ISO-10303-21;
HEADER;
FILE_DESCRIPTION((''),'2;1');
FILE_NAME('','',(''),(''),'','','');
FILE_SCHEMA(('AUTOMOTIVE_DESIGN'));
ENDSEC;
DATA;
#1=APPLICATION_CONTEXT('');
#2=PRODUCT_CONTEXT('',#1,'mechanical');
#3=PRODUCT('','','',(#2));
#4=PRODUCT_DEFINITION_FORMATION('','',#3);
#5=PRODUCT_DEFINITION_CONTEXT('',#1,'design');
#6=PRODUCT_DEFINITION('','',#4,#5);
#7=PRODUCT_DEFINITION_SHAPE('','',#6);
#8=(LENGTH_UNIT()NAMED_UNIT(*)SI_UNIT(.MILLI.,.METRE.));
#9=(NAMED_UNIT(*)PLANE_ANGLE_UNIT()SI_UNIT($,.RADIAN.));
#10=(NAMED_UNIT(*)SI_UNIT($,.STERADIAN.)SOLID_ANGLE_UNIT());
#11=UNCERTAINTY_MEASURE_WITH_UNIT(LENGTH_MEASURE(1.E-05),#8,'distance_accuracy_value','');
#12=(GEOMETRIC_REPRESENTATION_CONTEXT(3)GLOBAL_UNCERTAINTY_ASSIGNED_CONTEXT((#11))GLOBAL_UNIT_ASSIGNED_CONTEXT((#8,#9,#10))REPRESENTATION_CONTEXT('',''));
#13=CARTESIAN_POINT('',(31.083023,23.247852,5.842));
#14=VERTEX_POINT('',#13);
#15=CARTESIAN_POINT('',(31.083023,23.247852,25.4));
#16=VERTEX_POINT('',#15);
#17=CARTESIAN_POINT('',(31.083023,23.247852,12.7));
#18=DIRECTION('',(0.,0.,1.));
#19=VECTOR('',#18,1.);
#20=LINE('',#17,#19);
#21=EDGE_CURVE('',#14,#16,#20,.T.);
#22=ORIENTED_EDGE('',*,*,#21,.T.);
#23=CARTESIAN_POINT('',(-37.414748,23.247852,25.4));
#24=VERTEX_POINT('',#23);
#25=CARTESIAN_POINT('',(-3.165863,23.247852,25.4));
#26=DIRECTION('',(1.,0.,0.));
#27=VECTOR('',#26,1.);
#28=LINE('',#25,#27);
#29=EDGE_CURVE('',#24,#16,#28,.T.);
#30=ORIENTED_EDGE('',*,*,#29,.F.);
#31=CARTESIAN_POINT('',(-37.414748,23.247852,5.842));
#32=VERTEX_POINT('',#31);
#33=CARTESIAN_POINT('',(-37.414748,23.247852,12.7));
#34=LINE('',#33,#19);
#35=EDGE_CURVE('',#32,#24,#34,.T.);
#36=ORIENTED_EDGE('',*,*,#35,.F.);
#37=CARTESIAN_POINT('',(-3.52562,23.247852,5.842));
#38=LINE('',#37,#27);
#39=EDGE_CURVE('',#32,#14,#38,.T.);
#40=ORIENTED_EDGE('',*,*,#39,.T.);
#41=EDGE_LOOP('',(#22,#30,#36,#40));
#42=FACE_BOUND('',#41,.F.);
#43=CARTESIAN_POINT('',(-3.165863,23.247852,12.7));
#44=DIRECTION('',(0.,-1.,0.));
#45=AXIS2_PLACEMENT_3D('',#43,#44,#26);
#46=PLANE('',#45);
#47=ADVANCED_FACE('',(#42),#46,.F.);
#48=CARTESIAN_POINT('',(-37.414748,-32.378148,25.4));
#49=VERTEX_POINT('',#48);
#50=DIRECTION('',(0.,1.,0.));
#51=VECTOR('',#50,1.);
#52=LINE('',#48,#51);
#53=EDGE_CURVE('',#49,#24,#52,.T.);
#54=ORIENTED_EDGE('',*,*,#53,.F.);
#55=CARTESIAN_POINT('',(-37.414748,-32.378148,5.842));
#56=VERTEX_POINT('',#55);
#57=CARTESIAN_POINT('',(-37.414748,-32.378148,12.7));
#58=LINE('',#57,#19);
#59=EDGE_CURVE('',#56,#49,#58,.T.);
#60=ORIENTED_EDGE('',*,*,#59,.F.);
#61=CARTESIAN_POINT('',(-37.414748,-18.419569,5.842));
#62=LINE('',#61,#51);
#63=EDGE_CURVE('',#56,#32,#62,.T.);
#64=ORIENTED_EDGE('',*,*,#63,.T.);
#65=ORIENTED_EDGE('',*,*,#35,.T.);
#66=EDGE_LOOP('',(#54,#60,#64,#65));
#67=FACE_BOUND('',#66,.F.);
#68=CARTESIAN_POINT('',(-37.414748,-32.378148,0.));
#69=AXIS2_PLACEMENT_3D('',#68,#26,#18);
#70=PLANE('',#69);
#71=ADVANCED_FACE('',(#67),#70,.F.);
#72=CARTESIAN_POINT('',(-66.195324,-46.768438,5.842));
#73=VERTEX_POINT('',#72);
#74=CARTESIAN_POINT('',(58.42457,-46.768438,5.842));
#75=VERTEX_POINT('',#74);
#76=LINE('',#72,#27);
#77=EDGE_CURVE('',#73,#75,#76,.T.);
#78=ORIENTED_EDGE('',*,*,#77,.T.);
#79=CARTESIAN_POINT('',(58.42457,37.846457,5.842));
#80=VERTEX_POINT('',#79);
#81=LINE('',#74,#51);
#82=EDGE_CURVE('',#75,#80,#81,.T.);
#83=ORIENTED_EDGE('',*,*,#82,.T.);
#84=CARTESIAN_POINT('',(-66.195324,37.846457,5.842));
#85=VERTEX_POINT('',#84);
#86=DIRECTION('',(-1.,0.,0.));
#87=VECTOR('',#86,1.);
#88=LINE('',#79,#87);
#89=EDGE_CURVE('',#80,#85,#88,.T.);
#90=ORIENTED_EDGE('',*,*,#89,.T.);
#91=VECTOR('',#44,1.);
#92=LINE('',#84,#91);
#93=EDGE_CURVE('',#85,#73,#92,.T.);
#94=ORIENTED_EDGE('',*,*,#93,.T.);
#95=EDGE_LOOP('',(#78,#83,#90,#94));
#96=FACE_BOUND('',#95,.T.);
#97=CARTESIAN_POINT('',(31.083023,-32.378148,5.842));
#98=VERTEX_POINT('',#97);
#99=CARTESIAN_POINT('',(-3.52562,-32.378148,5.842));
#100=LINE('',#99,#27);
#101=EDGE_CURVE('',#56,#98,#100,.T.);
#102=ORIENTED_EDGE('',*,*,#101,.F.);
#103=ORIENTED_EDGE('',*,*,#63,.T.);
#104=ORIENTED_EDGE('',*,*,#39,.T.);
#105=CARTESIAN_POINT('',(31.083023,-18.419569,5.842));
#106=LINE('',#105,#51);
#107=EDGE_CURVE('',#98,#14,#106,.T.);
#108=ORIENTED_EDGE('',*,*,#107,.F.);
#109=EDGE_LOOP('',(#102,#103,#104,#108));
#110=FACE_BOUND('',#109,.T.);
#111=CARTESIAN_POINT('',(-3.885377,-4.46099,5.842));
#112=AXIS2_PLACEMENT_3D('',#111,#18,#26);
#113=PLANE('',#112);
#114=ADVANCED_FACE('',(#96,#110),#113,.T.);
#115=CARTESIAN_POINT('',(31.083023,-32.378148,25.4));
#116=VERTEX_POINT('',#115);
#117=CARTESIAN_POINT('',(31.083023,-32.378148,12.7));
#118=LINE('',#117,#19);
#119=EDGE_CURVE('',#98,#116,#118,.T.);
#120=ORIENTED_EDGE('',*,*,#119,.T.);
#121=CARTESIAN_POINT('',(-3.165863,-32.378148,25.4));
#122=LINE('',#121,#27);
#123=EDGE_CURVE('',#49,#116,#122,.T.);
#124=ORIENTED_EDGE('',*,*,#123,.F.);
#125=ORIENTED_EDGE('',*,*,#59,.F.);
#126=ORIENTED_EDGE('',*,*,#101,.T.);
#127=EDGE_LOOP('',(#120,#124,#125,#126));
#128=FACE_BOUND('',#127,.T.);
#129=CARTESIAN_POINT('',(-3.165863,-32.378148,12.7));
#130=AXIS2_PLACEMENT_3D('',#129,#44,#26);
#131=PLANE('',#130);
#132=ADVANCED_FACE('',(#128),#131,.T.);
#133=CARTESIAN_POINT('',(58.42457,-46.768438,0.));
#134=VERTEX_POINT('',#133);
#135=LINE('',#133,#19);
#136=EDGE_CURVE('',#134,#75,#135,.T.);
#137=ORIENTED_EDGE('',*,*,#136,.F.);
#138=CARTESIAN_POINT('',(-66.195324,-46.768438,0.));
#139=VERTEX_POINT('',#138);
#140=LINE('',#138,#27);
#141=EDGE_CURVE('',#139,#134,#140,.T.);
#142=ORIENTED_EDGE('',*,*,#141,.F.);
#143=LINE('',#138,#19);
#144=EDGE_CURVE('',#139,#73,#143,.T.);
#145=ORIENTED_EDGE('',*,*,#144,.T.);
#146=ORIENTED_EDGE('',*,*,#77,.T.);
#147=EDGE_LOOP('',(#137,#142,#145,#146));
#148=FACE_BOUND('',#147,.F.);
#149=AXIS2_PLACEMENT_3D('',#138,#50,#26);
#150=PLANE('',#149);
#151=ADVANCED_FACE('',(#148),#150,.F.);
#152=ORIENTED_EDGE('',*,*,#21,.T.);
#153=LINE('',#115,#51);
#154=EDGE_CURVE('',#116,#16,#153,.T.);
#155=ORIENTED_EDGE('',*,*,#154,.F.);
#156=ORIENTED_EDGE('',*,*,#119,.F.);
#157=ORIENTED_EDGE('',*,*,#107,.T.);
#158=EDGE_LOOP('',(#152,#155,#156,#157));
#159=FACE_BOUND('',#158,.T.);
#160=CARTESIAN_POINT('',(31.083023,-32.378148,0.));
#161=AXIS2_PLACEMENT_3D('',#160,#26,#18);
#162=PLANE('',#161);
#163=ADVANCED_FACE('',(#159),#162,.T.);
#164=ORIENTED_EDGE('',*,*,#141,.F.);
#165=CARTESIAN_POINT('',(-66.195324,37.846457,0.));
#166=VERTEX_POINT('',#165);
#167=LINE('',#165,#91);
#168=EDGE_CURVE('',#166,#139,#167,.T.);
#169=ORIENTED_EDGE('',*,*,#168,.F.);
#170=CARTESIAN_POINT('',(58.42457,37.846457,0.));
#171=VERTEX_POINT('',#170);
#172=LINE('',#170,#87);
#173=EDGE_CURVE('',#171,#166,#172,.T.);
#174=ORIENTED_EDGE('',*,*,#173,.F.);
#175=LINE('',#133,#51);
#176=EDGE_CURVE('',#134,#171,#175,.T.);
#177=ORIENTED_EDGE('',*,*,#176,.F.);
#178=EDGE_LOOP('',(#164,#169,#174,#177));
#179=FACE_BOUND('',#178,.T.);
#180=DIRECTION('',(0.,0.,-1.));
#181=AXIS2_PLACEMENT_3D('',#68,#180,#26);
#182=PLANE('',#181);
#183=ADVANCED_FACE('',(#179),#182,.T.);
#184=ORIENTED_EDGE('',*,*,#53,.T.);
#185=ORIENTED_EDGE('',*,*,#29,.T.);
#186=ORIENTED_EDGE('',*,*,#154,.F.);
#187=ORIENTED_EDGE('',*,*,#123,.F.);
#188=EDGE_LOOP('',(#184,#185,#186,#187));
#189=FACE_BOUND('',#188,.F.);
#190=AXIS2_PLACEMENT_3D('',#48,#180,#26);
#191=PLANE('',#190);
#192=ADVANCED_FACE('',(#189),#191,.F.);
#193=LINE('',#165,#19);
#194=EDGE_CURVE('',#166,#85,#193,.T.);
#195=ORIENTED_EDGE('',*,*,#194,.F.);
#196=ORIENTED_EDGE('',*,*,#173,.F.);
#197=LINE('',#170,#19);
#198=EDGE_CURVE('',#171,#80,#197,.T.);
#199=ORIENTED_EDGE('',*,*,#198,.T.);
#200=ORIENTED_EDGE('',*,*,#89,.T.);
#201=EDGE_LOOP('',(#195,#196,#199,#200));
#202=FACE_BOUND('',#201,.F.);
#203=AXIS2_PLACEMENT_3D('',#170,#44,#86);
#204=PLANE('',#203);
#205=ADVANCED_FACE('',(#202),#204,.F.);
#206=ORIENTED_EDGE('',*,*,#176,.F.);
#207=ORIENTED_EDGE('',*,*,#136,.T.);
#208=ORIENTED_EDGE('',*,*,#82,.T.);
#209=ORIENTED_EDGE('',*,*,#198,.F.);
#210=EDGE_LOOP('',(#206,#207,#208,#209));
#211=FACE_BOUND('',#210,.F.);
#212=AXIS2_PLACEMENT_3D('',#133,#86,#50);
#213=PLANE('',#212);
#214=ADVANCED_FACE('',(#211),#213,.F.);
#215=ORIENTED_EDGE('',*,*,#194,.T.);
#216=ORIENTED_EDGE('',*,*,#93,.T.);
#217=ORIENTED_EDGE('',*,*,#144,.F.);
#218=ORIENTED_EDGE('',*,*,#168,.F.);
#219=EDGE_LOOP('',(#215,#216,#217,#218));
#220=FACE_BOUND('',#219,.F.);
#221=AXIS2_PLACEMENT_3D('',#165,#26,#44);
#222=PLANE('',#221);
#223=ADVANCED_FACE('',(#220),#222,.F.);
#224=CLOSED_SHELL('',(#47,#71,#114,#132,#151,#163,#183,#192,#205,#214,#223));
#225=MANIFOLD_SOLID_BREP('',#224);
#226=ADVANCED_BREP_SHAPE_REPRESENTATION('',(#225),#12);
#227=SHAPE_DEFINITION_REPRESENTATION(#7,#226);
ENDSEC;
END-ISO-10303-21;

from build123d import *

# Parameters (mm, degrees)
F3_DEPTH = 5.842
F1_E1_W  = 68.4977713972
F1_E1_H  = 25.4
F4_DEPTH = 55.626


with BuildPart() as f3:
    # F2 (on Top) → F3 (new body)
    with BuildSketch(Plane.XY):
        Polygon((-66.1953240633, 37.8464572132), (-66.1953240633, 32.953761518), (-66.1953240633, -46.768438071), (51.8050417304, -46.768438071), (58.4245696664, -46.768438071), (58.4245696664, 37.8464572132), align=None)
    extrude(amount=F3_DEPTH)

    # F1_E1 (on explicit) → F4 (join)
    with BuildSketch(Plane(origin=(-37.4147482216, -32.3781482875, 0), x_dir=(1, 0, 0), z_dir=(0, -1, 0))):
        with Locations((34.2488856986, 12.7)):
            Rectangle(F1_E1_W, F1_E1_H)
    extrude(amount=-F4_DEPTH)


solid = f3.part
